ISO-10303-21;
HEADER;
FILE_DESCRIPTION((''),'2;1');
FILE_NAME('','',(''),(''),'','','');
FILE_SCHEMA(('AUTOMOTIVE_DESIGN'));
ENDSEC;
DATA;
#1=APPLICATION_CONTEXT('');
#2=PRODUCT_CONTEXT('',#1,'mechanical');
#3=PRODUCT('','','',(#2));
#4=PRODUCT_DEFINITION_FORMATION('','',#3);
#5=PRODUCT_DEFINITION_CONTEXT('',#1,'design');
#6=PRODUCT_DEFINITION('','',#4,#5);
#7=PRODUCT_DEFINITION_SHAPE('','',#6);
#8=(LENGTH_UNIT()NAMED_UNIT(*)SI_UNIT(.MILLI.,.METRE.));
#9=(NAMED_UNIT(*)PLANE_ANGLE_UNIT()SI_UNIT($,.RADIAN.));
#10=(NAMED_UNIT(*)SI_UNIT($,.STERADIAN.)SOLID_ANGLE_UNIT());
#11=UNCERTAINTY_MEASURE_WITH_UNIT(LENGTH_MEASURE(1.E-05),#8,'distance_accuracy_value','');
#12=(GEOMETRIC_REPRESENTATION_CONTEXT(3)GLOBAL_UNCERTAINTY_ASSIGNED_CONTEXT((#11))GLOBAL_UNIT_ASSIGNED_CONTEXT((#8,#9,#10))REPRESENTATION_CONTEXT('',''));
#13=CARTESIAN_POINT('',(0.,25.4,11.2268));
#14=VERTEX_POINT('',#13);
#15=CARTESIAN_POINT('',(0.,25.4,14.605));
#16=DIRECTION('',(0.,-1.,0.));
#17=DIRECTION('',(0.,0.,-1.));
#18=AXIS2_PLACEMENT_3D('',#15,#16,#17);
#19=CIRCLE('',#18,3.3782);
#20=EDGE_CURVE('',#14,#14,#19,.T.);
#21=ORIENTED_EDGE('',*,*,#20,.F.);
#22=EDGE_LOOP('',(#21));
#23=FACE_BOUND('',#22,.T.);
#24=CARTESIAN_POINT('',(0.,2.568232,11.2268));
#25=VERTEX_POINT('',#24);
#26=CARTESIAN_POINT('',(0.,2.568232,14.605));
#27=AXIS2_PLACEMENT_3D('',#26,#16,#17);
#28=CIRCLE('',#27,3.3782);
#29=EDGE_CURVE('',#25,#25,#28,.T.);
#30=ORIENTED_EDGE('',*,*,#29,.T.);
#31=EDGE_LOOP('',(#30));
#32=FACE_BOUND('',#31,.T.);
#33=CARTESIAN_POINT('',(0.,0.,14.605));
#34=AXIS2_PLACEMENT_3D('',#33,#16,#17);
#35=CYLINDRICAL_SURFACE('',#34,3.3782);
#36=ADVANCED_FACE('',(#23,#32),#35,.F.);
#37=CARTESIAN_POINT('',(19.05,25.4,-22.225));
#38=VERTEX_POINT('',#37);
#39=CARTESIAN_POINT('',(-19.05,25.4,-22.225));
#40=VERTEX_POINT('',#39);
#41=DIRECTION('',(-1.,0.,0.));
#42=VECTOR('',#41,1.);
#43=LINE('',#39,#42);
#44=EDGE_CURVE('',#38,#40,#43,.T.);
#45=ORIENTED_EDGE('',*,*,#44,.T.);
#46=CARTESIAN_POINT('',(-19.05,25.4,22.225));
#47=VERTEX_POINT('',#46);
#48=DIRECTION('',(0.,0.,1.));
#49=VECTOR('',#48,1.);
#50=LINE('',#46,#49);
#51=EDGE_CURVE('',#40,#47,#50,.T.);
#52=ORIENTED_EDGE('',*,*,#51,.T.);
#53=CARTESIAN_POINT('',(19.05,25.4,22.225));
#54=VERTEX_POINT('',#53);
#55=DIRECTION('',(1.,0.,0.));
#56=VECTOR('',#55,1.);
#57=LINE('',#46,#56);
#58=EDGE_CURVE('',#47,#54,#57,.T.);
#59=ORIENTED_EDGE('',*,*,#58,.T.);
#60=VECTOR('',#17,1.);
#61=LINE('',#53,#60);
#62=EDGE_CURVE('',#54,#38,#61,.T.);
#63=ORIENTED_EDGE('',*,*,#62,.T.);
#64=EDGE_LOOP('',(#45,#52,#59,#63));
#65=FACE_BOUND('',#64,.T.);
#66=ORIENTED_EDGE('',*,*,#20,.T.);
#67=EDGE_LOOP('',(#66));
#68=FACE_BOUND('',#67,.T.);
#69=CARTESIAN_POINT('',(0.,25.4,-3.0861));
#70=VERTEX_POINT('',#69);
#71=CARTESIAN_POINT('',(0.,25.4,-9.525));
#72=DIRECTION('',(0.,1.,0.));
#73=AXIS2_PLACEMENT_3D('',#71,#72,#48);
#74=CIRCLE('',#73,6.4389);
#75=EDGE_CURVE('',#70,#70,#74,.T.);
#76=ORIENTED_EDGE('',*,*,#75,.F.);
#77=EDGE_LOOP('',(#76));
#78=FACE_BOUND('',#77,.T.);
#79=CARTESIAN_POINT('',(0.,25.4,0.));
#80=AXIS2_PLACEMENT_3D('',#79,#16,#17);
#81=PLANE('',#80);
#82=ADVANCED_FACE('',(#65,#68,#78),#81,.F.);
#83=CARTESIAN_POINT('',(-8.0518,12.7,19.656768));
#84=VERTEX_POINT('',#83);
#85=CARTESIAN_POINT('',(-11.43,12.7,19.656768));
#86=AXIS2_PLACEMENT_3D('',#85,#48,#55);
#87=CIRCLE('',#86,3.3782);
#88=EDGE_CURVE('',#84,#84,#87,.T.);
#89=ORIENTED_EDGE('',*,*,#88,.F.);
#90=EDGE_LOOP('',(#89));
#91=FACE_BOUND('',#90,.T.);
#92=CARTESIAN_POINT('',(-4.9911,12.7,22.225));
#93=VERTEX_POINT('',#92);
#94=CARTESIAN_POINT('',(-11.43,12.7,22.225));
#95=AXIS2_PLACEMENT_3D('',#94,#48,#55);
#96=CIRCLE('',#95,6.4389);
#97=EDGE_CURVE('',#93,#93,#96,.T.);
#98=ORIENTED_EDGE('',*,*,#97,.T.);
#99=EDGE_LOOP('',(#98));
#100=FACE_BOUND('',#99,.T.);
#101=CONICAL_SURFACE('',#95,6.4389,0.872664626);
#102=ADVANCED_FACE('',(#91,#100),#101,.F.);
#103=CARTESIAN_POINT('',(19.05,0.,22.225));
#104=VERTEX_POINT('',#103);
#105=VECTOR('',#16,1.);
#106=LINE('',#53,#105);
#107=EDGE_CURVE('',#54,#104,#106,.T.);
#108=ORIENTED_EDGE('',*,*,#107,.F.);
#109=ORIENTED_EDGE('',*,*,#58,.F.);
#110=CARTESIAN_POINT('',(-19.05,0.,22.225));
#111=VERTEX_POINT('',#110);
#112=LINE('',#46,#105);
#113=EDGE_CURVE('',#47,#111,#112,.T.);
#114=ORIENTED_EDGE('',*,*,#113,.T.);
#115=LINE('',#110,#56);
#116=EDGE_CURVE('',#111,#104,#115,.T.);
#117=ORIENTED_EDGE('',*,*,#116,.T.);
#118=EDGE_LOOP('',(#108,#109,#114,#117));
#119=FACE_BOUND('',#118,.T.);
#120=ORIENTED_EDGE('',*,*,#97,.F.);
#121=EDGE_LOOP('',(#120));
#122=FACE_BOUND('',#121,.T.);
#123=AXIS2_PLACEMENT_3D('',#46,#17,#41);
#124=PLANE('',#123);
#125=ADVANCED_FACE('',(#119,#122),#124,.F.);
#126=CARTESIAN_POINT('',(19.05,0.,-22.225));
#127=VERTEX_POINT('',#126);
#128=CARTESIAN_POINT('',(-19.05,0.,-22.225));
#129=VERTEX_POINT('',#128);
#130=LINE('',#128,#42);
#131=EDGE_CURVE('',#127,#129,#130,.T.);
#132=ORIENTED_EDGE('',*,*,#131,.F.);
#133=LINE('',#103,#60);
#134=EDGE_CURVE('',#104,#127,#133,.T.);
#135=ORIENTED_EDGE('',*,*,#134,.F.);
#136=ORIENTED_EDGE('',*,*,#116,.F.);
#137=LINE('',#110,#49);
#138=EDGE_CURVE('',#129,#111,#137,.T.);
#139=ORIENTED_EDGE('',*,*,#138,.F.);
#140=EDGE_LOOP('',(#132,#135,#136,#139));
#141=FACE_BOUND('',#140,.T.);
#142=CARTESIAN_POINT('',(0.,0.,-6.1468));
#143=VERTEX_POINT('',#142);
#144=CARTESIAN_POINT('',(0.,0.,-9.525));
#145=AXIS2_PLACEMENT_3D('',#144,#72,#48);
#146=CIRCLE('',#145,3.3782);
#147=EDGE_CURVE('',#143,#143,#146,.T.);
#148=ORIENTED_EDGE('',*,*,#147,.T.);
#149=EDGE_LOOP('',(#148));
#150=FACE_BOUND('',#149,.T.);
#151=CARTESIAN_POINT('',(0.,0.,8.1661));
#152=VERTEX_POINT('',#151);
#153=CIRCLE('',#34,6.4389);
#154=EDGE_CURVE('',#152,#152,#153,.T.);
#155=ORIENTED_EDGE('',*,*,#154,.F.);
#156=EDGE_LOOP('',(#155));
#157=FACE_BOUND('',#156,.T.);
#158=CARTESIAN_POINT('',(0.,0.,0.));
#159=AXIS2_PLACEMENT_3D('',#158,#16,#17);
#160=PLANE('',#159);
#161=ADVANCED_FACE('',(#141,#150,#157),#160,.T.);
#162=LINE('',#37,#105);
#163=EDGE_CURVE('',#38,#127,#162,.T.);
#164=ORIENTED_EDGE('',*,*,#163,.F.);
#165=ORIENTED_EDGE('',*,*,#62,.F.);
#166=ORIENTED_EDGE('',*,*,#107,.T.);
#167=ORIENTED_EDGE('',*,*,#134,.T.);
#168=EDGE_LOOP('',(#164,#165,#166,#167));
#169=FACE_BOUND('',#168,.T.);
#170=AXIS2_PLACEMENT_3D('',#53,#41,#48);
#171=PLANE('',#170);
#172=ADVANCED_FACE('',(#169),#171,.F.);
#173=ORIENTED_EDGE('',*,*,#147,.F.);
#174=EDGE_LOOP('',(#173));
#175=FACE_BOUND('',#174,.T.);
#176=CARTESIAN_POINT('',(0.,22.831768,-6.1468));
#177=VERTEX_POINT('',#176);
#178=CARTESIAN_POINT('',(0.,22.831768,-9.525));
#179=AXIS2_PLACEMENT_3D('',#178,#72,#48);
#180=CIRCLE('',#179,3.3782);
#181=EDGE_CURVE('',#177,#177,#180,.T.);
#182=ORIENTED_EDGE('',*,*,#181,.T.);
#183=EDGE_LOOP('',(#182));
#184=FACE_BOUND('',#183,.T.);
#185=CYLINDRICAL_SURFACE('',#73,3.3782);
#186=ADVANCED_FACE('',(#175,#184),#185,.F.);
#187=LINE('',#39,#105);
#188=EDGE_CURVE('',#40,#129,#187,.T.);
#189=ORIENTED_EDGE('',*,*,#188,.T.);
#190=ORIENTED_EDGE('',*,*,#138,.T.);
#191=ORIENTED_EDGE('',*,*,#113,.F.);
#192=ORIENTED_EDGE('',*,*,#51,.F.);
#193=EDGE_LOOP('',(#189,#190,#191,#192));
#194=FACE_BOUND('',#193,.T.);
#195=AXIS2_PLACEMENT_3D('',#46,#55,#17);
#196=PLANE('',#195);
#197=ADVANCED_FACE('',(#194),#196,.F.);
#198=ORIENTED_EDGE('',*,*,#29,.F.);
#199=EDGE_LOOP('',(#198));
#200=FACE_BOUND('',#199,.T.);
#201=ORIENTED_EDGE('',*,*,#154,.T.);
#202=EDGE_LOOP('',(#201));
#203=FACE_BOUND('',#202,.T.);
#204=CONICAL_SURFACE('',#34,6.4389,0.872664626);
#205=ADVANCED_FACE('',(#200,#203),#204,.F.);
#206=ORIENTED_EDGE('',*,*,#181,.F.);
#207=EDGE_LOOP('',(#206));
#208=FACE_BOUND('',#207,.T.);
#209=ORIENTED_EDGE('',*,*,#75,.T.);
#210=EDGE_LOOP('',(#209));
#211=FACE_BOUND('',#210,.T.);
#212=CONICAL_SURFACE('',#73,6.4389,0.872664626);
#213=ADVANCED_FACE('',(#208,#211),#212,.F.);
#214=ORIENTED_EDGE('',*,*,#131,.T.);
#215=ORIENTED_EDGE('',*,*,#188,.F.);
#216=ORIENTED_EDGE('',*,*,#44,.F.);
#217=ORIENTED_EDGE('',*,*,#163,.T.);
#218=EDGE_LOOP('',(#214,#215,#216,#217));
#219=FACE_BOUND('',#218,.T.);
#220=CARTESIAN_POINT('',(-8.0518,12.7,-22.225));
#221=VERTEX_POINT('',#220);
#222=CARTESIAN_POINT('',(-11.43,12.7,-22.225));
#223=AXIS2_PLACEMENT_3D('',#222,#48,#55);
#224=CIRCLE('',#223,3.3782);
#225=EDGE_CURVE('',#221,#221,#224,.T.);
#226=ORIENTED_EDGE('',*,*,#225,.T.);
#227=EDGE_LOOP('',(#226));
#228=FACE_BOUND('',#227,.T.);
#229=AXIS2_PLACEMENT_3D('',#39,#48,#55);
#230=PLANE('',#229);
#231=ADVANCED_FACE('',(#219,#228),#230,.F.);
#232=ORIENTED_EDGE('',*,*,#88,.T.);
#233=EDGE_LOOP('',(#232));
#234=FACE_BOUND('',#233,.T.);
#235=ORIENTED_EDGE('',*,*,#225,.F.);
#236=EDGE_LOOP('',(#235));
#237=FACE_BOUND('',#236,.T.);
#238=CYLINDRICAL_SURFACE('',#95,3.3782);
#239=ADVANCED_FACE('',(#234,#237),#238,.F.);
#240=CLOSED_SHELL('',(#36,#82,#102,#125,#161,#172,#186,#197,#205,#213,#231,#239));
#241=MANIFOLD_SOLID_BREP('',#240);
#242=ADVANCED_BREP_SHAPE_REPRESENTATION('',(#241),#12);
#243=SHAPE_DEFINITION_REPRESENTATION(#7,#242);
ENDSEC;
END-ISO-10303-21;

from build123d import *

# Parameters (mm, degrees)
SKETCH1_W                                           = 38.1
SKETCH1_H                                           = 44.45
BOSS_EXTRUDE1_DEPTH                                 = 25.4
CSK_FOR_1_4_FLAT_HEAD_MACHINE_SCREW_100_D           = 6.7564
CSK_FOR_1_4_FLAT_HEAD_MACHINE_SCREW_100_CSINK_D     = 12.8778
CSK_FOR_1_4_FLAT_HEAD_MACHINE_SCREW_100_CSINK_ANGLE = 100
CSK_FOR_1_4_FLAT_HEAD_MACHINE_SCREW_2_D             = 6.7564
CSK_FOR_1_4_FLAT_HEAD_MACHINE_SCREW_2_CSINK_D       = 12.8778
CSK_FOR_1_4_FLAT_HEAD_MACHINE_SCREW_2_CSINK_ANGLE   = 100


# Read off the part's stored shape, not the designer's step: CSK for 1/4 Flat Head Machine Screw (100)3
with BuildPart() as part:
    # Sketch1 → Boss-Extrude1 (new body)
    with BuildSketch(Plane(origin=(0, 0, 0), x_dir=(1, 0, 0), z_dir=(0, 1, 0))):
        Rectangle(SKETCH1_W, SKETCH1_H)
    extrude(amount=BOSS_EXTRUDE1_DEPTH)

    # CSK for 1_4 Flat Head Machine Screw _100 (through all)
    with Locations(Plane(origin=(0, 25.4, 0), x_dir=(1, 0, 0), z_dir=(0, 1, 0))):
        with Locations((0, 9.525)):
            CounterSinkHole(CSK_FOR_1_4_FLAT_HEAD_MACHINE_SCREW_100_D / 2, CSK_FOR_1_4_FLAT_HEAD_MACHINE_SCREW_100_CSINK_D / 2, counter_sink_angle=CSK_FOR_1_4_FLAT_HEAD_MACHINE_SCREW_100_CSINK_ANGLE)

    # CSK for 1_4 Flat Head Machine Screw  2 (through all)
    with Locations(Plane.XZ):
        with Locations((0, 14.605)):
            CounterSinkHole(CSK_FOR_1_4_FLAT_HEAD_MACHINE_SCREW_2_D / 2, CSK_FOR_1_4_FLAT_HEAD_MACHINE_SCREW_2_CSINK_D / 2, counter_sink_angle=CSK_FOR_1_4_FLAT_HEAD_MACHINE_SCREW_2_CSINK_ANGLE)

    # CSK for 1_4 Flat Head Machine Screw 3 ou → CSK for 1_4 Flat Head Machine Screw  3 (revolve, cut)
    with BuildSketch(Plane(origin=(-11.43, 12.7, 0), x_dir=(1, 0, 0), z_dir=(0, -1, 0))):
        Polygon((0, -22.225), (3.3782, -22.225), (3.3782, 19.656767759), (6.4389, 22.225), (0, 22.225), align=None)
    revolve(axis=Axis((-11.43, 12.7, 0), (0, 0, 1)), mode=Mode.SUBTRACT)


solid = part.part
